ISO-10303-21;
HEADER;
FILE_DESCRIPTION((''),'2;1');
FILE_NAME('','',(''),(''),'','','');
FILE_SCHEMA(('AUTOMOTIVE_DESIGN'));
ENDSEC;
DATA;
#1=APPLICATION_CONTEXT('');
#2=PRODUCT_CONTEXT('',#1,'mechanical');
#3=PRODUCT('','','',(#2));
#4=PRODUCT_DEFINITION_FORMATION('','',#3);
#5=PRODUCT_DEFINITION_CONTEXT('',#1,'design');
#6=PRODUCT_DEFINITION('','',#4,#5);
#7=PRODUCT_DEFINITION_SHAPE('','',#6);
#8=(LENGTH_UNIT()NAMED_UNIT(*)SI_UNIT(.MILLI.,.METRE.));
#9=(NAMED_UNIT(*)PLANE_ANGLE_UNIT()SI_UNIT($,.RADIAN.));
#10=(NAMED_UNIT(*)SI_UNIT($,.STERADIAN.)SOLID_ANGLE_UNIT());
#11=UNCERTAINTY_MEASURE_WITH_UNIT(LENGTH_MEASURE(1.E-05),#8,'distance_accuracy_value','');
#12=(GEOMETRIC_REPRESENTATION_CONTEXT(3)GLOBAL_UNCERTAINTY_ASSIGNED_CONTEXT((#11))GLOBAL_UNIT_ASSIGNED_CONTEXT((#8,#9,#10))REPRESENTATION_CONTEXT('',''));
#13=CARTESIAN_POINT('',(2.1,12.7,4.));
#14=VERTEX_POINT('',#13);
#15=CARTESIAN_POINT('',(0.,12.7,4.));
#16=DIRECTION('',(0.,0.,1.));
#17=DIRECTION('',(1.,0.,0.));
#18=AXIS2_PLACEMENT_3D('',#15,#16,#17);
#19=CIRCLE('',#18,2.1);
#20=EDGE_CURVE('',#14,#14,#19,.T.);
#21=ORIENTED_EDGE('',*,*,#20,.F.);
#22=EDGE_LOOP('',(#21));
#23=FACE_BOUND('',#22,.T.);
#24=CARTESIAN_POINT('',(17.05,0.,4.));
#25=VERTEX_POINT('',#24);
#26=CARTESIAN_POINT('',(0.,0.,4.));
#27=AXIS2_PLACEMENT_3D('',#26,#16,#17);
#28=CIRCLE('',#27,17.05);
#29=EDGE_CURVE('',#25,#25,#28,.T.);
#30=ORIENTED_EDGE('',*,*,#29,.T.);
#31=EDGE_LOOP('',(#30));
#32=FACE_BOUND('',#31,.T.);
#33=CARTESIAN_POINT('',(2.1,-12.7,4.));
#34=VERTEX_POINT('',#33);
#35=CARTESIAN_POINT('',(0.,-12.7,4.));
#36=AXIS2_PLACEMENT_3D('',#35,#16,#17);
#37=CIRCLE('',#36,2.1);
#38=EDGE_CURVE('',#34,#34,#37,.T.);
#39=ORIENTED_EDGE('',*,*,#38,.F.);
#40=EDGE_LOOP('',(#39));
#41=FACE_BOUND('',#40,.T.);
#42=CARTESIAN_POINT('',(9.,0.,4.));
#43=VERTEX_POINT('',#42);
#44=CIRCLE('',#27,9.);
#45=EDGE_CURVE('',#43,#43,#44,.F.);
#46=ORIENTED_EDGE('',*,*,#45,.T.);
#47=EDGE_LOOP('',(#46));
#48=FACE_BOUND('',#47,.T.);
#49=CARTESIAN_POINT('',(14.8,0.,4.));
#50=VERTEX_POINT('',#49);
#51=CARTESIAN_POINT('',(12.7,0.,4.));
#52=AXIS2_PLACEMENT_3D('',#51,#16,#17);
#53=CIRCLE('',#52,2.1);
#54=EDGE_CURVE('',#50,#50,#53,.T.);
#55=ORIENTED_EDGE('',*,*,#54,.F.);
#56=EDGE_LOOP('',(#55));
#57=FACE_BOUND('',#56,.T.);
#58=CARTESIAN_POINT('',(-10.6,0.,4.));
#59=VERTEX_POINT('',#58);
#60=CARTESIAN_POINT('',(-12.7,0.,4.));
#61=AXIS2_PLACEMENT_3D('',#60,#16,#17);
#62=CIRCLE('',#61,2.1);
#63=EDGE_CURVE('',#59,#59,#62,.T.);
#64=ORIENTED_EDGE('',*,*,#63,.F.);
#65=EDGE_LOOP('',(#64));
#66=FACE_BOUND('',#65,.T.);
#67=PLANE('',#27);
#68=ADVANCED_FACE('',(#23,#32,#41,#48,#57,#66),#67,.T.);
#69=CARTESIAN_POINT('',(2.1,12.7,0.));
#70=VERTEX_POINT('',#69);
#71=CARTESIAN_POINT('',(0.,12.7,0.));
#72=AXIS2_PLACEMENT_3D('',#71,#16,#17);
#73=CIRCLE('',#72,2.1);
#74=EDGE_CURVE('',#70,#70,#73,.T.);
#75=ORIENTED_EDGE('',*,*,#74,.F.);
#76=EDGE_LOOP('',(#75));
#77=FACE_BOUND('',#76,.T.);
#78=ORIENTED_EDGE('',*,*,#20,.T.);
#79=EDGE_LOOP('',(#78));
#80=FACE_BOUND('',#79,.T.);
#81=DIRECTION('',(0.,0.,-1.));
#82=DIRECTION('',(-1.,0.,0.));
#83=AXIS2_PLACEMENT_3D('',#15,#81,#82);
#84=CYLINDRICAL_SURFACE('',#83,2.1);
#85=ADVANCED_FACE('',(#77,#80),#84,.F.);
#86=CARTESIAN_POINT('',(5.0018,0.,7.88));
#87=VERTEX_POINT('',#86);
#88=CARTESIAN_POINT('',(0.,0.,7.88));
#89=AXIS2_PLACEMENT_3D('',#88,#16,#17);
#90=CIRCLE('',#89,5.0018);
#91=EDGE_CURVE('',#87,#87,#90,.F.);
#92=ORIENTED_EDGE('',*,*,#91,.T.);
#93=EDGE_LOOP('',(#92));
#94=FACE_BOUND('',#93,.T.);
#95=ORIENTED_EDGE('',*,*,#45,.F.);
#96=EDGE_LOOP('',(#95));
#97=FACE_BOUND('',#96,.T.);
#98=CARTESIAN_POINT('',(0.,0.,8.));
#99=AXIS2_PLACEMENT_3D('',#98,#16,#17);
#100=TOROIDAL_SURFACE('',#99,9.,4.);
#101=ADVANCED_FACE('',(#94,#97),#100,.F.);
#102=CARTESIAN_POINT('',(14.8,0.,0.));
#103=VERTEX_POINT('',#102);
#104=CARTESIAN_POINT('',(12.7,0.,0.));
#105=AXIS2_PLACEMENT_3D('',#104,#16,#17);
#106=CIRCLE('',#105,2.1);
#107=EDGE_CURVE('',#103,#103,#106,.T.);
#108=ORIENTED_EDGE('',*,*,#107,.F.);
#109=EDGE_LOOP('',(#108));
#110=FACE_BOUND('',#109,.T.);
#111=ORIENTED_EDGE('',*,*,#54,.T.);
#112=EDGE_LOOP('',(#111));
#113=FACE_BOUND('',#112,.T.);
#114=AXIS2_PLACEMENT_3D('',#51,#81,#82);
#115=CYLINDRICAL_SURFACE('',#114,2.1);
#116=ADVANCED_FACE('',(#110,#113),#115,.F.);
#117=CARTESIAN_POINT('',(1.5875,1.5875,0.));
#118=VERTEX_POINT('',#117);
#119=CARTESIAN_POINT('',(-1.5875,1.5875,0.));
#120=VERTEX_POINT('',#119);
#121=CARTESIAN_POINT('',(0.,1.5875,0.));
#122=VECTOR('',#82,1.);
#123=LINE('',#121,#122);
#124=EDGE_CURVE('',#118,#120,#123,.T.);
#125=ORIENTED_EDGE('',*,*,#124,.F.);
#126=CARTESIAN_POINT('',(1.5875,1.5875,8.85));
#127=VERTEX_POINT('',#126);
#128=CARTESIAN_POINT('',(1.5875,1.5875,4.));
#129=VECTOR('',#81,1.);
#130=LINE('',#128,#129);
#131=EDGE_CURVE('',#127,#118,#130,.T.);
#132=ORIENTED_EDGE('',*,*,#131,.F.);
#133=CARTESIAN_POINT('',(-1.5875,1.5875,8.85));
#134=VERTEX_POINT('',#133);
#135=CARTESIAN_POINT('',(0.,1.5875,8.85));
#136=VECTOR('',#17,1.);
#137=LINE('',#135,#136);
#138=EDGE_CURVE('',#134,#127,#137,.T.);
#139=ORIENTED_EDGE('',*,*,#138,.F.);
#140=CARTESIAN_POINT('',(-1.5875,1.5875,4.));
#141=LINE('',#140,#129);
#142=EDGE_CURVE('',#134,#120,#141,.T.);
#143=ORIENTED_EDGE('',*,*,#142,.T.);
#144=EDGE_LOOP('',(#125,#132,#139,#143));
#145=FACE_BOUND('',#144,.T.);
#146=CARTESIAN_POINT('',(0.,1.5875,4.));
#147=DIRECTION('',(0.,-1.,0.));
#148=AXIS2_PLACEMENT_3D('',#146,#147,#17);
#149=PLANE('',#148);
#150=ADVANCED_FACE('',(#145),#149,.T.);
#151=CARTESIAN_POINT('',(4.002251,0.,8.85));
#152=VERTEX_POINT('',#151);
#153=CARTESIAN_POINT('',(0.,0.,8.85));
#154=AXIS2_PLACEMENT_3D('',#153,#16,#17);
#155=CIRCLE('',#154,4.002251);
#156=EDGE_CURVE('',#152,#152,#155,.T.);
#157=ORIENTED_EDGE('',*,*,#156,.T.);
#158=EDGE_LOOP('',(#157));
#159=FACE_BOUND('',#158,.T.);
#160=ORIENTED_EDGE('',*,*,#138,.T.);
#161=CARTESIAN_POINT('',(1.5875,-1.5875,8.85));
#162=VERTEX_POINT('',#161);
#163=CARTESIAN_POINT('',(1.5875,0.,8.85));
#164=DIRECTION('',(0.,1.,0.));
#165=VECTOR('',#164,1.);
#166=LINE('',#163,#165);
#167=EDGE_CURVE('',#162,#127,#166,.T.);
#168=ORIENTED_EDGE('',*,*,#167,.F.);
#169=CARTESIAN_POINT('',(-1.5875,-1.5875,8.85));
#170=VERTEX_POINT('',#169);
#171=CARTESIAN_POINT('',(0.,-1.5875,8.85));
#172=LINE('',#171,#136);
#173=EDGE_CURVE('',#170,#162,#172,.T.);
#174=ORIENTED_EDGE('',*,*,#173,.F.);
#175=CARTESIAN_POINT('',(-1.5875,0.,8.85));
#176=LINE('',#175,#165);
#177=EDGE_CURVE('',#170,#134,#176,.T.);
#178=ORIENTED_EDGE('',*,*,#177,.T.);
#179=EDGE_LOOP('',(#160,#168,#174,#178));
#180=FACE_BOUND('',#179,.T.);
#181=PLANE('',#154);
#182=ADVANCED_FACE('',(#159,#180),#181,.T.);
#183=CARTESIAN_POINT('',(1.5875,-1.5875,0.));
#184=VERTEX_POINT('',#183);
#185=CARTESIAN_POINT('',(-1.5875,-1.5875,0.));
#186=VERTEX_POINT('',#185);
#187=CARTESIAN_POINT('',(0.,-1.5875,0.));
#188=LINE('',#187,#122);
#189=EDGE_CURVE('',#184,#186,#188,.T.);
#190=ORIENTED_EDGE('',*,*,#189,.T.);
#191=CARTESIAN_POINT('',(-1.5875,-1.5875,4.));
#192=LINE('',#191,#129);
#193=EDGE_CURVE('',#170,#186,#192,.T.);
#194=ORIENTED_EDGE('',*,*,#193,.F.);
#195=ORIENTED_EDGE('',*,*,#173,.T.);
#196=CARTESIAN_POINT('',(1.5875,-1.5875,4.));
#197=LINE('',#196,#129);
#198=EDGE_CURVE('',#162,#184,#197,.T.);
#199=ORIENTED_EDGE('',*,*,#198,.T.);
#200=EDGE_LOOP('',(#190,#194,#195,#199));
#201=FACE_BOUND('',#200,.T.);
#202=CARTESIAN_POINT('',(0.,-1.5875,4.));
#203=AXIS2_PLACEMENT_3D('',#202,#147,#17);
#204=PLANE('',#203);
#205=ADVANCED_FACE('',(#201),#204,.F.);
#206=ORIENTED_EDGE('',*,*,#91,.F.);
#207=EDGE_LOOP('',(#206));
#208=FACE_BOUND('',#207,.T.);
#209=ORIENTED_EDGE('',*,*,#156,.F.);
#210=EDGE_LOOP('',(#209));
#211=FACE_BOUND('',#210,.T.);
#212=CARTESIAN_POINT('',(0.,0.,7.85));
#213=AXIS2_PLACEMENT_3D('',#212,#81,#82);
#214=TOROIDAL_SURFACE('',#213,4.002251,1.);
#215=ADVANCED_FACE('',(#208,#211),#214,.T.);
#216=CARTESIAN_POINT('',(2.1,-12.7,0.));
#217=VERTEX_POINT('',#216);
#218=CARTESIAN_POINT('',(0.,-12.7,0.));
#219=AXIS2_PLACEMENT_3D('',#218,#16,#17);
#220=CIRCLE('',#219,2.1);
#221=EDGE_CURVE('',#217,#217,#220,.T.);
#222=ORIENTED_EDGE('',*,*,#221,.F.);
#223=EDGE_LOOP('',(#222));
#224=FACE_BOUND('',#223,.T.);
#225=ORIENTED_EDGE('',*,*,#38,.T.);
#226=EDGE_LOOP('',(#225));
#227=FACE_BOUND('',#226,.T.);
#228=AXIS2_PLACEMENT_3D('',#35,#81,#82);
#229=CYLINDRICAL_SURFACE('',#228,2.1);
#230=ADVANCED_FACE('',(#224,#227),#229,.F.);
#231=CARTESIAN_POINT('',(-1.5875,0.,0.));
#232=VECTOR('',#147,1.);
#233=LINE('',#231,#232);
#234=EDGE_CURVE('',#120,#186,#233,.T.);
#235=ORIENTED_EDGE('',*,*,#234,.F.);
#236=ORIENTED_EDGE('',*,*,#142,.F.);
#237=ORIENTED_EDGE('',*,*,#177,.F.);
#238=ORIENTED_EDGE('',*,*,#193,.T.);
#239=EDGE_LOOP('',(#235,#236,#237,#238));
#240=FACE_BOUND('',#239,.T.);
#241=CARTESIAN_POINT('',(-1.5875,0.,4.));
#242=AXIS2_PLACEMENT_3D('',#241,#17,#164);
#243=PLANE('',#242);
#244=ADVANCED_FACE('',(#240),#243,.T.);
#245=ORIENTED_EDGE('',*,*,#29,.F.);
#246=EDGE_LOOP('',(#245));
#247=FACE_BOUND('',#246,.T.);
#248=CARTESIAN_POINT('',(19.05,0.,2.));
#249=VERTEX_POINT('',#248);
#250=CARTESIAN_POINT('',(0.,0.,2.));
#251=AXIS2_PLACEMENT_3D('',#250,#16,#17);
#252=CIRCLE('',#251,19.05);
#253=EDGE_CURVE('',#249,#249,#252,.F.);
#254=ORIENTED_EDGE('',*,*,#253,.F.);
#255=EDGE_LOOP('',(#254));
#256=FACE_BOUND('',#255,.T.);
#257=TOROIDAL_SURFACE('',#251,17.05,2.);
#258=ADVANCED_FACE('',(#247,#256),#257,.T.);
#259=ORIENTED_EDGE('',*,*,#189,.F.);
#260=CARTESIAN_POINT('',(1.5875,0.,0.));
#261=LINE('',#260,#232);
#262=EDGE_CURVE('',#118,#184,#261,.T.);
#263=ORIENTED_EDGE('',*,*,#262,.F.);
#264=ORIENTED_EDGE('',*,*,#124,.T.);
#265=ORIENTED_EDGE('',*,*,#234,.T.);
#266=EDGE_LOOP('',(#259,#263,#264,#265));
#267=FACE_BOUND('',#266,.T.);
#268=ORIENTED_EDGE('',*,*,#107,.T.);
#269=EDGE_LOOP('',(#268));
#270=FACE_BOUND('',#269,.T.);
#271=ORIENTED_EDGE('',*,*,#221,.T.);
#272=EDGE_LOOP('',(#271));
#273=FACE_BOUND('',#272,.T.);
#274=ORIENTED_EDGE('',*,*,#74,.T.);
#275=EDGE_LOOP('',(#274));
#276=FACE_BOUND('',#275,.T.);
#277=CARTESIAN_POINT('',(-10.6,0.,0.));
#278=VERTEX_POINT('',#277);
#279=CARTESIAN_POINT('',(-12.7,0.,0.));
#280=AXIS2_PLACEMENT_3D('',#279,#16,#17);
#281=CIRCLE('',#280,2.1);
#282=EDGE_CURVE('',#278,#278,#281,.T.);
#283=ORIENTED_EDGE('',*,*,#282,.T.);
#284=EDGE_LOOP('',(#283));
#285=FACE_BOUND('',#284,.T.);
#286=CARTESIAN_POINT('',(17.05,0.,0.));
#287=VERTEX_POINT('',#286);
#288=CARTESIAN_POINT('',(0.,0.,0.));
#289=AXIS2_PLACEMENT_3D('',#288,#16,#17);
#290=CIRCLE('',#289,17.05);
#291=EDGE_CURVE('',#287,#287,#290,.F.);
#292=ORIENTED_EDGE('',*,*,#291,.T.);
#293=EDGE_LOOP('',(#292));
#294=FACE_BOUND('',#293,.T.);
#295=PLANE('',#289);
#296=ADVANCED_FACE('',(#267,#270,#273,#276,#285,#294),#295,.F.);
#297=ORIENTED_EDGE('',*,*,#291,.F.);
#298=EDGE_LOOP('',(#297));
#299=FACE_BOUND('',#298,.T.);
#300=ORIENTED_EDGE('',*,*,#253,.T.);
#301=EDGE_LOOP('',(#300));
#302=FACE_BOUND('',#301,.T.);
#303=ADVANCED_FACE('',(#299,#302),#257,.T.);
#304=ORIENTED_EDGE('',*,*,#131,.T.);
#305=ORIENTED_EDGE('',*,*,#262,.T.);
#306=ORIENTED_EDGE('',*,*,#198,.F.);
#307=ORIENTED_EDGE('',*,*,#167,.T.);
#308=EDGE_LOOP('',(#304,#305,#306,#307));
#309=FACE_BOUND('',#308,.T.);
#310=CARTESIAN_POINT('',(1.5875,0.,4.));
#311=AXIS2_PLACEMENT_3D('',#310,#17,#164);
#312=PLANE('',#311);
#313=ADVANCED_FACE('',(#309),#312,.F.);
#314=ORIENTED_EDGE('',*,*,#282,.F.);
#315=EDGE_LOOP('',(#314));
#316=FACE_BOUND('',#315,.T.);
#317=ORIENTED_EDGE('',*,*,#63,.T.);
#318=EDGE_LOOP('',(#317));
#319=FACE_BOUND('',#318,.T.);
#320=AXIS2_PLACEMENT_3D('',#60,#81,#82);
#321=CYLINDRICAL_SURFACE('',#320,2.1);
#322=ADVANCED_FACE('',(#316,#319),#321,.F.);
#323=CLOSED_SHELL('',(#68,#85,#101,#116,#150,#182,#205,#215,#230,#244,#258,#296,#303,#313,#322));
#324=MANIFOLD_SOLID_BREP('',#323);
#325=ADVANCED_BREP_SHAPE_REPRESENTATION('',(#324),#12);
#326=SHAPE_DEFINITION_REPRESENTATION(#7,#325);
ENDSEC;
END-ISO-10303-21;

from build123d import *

# Parameters (mm, degrees)
SKETCH1_R           = 19.05
SKETCH1_R_2         = 5
SKETCH1_R_3         = 2.1
SKETCH1_W           = 3.175
SKETCH1_H           = 3.175
BOSS_EXTRUDE1_DEPTH = 4
BOSS_EXTRUDE2_START = 4
SKETCH1_3_R         = 5
SKETCH1_3_W         = 3.175
SKETCH1_3_H         = 3.175
BOSS_EXTRUDE2_DEPTH = 4.85
FILLET1_R           = 4
FILLET2_R           = 1
FILLET3_R           = 2


with BuildPart() as part:
    # Sketch1 → Boss-Extrude1 (new body)
    # profile 1 of 2: a face of its own
    with BuildSketch(Plane.XY):
        Circle(SKETCH1_R)
        Circle(SKETCH1_R_2, mode=Mode.SUBTRACT)
        with Locations((12.7, 0)):
            Circle(SKETCH1_R_3, mode=Mode.SUBTRACT)
        with Locations((0, -12.7)):
            Circle(SKETCH1_R_3, mode=Mode.SUBTRACT)
        with Locations((-12.7, 0)):
            Circle(SKETCH1_R_3, mode=Mode.SUBTRACT)
        with Locations((0, 12.7)):
            Circle(SKETCH1_R_3, mode=Mode.SUBTRACT)
    # profile 2 of 2: a face of its own
    with BuildSketch(Plane.XY):
        Circle(SKETCH1_R_2)
        Rectangle(SKETCH1_W, SKETCH1_H, mode=Mode.SUBTRACT)
    extrude(amount=BOSS_EXTRUDE1_DEPTH)

    # Sketch1<3> → Boss-Extrude2 (add)
    with BuildSketch(Plane.XY.offset(BOSS_EXTRUDE2_START)):
        Circle(SKETCH1_3_R)
        Rectangle(SKETCH1_3_W, SKETCH1_3_H, mode=Mode.SUBTRACT)
    extrude(amount=BOSS_EXTRUDE2_DEPTH)

    # Fillet1
    fillet1_edges = [part.edges().sort_by_distance(p)[0] for p in [
        (-5, 0, 4),
    ]]
    fillet(fillet1_edges, radius=FILLET1_R)

    # Fillet2
    fillet2_edges = [part.edges().sort_by_distance(p)[0] for p in [
        (-5, 0, 8.85),
    ]]
    fillet(fillet2_edges, radius=FILLET2_R)

    # Fillet3
    fillet3_edges = [part.edges().sort_by_distance(p)[0] for p in [
        (-19.05, 0, 0),
        (-19.05, 0, 4),
    ]]
    fillet(fillet3_edges, radius=FILLET3_R - 0.0001)  # a hair under: the kernel refuses the full size


solid = part.part
